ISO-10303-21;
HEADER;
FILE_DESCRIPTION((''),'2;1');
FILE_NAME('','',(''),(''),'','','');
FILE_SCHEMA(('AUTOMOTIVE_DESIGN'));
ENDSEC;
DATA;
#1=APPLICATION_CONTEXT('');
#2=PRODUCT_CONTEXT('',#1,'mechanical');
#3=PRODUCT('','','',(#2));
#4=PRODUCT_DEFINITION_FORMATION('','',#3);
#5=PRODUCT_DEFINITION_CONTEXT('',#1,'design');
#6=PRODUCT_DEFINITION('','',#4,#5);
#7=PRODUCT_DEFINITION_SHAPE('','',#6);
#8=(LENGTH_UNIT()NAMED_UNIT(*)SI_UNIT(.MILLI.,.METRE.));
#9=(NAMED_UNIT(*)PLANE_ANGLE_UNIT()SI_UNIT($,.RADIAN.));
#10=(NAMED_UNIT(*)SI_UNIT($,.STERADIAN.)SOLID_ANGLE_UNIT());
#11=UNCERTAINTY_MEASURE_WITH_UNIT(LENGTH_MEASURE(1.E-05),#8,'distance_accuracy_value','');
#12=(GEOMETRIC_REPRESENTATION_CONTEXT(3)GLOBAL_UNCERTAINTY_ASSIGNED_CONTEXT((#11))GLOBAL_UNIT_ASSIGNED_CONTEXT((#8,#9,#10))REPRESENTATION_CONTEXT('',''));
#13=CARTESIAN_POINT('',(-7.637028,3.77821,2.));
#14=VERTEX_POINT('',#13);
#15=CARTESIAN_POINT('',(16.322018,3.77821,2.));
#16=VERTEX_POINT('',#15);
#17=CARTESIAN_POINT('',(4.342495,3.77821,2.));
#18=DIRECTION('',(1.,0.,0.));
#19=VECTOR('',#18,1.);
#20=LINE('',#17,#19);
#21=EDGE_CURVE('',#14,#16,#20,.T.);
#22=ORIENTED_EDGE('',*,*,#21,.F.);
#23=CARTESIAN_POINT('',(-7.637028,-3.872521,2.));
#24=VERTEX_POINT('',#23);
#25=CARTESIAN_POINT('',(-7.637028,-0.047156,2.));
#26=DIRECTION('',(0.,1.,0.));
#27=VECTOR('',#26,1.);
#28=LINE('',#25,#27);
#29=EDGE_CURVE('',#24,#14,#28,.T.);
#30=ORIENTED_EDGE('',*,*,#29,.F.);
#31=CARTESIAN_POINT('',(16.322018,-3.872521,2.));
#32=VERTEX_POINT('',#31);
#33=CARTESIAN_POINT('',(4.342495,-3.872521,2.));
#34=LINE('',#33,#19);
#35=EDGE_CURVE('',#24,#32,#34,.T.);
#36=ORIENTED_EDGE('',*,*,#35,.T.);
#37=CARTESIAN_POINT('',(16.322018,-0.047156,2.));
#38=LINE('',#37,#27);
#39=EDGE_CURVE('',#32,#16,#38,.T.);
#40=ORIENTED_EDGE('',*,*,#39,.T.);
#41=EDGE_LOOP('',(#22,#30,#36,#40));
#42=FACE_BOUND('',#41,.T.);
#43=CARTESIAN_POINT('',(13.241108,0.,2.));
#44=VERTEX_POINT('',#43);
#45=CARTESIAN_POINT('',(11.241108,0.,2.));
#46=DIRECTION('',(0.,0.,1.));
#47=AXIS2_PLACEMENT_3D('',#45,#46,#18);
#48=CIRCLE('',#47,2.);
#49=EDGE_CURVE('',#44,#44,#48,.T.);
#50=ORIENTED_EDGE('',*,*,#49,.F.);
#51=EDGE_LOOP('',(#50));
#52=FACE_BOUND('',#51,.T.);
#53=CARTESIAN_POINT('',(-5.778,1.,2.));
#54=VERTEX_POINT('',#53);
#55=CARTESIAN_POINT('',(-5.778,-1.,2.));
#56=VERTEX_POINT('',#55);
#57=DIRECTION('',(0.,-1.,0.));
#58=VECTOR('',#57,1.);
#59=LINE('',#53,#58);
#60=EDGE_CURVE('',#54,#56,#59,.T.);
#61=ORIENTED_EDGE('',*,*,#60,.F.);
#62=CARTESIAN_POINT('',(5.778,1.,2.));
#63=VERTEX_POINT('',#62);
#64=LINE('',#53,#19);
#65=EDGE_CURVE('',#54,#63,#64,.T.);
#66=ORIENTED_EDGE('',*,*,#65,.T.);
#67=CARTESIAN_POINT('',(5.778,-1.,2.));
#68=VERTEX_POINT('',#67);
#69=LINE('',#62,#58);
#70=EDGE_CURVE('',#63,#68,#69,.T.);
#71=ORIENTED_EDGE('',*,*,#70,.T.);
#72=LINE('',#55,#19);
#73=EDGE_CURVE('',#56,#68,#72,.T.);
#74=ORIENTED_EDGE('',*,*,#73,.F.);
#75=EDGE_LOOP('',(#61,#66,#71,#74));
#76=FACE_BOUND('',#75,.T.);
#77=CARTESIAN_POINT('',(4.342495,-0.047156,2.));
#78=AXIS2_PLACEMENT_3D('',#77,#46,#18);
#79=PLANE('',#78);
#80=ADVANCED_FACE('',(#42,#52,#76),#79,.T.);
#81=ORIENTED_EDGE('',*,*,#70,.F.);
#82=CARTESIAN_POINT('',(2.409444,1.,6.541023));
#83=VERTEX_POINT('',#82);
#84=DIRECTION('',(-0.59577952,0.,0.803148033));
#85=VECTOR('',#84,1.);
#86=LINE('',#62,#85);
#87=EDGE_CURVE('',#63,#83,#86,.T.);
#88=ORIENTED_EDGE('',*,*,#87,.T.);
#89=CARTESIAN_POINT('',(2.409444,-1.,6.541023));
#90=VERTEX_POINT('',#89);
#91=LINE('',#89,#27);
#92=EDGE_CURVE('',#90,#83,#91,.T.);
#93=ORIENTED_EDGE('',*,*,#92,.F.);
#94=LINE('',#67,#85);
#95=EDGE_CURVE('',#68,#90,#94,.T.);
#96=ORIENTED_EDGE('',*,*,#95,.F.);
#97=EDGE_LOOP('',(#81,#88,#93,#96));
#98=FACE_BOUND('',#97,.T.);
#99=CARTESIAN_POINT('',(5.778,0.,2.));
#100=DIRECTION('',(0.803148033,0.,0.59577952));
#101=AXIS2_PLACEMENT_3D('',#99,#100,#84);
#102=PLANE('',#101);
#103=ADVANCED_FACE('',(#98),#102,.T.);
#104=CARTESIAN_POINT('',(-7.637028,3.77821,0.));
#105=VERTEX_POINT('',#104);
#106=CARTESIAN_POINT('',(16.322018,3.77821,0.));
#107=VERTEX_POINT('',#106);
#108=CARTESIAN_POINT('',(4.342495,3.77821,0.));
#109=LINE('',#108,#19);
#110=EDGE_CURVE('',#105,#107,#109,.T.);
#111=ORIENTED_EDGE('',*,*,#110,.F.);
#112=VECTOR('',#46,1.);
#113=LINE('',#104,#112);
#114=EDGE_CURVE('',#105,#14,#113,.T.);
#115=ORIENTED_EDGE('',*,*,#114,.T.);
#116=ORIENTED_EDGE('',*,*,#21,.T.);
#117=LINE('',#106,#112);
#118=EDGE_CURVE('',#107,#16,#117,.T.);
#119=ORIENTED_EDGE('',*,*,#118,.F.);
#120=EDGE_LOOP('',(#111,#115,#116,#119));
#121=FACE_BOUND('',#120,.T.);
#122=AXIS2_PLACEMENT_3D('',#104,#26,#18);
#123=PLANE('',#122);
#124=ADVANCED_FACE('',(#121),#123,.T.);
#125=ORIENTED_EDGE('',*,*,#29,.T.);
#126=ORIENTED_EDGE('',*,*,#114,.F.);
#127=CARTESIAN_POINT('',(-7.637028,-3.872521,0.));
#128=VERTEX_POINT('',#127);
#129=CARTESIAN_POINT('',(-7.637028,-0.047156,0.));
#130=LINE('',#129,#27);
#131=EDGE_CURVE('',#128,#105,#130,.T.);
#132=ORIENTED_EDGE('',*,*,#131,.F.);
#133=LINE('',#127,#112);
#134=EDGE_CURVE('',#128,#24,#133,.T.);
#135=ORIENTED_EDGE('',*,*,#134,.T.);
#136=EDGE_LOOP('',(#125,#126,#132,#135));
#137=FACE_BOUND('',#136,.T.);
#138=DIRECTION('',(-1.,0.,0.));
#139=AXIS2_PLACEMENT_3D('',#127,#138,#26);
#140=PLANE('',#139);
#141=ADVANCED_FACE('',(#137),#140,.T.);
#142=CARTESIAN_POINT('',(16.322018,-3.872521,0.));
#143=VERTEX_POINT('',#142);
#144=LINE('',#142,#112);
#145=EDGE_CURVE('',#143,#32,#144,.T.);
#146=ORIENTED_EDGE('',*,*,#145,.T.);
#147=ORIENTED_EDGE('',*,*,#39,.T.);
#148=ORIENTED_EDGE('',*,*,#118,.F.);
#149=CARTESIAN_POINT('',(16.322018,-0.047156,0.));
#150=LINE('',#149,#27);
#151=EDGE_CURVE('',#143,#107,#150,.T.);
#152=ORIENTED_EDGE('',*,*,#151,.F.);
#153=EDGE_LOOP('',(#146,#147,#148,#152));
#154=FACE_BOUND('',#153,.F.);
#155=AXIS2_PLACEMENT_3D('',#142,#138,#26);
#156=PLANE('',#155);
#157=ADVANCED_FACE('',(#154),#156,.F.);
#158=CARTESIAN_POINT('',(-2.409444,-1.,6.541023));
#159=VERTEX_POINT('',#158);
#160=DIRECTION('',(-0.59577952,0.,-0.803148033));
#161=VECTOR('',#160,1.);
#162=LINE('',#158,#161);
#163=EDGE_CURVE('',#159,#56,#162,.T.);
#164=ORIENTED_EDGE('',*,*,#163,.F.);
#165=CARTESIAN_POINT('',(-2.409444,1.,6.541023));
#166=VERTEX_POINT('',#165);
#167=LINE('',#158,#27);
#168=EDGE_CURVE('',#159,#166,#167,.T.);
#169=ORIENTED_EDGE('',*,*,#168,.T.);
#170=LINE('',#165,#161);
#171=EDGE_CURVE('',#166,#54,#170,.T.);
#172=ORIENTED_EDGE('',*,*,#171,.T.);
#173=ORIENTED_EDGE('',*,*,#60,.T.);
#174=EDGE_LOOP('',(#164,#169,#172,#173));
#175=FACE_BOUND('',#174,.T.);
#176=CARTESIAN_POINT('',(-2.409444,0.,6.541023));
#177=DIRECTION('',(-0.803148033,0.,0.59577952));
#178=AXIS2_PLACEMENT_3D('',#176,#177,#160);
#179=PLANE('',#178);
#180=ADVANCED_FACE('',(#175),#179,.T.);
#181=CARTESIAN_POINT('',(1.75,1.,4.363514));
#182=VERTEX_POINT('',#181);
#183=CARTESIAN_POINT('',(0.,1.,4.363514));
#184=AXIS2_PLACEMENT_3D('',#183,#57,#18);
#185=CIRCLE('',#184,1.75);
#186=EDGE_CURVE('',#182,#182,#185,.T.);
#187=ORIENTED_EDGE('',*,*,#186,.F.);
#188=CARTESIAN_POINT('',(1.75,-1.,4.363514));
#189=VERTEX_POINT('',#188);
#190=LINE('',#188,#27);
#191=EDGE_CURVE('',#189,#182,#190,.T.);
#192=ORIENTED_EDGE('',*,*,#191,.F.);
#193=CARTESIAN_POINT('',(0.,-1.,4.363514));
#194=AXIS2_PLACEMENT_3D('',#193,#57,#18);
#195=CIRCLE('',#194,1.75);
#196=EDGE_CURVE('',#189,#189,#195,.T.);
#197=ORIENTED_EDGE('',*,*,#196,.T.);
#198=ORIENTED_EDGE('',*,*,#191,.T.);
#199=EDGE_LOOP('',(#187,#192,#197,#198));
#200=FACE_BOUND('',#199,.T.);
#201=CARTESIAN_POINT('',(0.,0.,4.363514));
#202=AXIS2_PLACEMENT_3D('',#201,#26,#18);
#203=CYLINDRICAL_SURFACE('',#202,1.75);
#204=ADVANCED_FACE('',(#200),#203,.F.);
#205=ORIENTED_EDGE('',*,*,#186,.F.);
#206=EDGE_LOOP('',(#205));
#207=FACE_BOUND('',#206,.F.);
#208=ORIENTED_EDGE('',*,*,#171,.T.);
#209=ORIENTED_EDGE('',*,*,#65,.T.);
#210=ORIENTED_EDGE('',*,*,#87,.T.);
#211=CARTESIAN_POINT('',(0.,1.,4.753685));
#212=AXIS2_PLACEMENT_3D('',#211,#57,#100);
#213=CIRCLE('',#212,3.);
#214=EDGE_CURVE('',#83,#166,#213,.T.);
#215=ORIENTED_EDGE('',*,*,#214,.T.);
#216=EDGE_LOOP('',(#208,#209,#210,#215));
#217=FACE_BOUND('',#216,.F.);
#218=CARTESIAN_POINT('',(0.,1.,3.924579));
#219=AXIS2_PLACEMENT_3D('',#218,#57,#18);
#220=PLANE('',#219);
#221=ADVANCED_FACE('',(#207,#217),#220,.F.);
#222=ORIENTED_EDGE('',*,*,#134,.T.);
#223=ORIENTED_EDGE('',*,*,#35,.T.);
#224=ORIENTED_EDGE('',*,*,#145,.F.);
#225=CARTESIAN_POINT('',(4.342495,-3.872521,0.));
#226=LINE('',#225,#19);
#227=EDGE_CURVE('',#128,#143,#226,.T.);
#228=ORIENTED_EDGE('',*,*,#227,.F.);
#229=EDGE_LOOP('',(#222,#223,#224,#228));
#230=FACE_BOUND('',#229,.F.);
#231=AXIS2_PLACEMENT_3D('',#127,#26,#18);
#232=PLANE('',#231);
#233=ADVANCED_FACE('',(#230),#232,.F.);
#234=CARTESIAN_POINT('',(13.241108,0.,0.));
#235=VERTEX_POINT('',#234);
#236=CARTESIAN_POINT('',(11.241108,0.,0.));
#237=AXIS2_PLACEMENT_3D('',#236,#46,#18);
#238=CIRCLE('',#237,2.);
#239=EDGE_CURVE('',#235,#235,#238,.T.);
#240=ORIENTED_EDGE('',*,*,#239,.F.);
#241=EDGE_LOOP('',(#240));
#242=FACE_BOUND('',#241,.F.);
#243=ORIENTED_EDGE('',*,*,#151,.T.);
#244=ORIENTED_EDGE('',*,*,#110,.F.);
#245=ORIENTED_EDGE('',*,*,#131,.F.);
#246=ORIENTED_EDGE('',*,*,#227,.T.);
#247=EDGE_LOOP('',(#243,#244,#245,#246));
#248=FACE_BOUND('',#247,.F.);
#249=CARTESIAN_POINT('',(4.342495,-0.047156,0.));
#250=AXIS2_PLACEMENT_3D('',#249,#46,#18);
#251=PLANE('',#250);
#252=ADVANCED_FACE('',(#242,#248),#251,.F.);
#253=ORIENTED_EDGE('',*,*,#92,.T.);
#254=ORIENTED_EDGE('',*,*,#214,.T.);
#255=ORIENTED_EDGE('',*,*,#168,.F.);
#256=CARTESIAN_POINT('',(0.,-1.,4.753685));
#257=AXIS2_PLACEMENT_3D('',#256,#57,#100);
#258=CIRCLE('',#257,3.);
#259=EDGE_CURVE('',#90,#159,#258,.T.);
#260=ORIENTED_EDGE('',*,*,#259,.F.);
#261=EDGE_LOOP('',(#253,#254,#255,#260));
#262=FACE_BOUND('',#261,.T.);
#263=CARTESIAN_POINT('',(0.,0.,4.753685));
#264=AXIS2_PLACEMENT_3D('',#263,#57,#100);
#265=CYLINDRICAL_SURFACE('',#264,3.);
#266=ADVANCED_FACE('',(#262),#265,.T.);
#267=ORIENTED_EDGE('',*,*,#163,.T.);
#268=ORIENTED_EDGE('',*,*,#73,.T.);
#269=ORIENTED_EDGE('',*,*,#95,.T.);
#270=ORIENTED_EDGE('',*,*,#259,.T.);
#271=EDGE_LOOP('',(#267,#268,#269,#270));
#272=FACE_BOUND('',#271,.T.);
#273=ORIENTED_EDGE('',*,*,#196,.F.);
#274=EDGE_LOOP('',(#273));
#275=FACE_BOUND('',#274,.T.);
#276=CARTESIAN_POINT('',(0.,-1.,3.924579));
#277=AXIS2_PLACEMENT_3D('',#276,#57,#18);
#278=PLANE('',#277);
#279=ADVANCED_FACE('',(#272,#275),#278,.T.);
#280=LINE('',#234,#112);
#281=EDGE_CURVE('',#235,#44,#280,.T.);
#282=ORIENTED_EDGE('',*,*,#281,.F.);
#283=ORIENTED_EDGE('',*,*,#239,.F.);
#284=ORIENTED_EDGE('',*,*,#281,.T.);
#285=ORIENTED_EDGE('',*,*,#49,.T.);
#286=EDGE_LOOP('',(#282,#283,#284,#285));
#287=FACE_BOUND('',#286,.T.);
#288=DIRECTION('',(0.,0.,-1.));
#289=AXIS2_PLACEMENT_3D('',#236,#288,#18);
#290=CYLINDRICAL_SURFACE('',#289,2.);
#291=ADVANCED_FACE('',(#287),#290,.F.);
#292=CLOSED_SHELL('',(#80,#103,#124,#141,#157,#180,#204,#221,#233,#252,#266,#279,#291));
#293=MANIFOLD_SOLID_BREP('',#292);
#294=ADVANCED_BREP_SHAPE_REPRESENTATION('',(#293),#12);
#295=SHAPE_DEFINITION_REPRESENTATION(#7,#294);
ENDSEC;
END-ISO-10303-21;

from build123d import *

# Parameters (mm, degrees)
F0_W     = 23.9590460792
F0_H     = 7.6507304548
F0_R     = 2
F1_DEPTH = 2
F2_R     = 1.75
F3_DEPTH = 1


# Not quite as in the source:
# - a feature names something its author has since deleted; it is built from what else it names


with BuildPart() as f1:
    # F0 (on Top) → F1 (new body)
    with BuildSketch(Plane.XY):
        with Locations((4.3424949229, -0.0471555286)):
            Rectangle(F0_W, F0_H)
        with Locations((11.2411081956, 0)):
            Circle(F0_R, mode=Mode.SUBTRACT)
    extrude(amount=F1_DEPTH)

    # F2 (on Front) → F3 (join, symmetric)
    with BuildSketch(Plane.XZ):
        with BuildLine():
            Line((-2.4094440999, 6.5410234491), (-5.7779996579, 2))
            Line((-5.7779996579, 2), (5.7779996579, 2))
            Line((5.7779996579, 2), (2.4094440999, 6.5410234491))
            ThreePointArc((2.4094440999, 6.5410234491), (0, 7.7536848887), (-2.4094440999, 6.5410234491))
        make_face()
        with Locations((0, 4.3635135517)):
            Circle(F2_R, mode=Mode.SUBTRACT)
    extrude(amount=F3_DEPTH, both=True)


solid = f1.part
